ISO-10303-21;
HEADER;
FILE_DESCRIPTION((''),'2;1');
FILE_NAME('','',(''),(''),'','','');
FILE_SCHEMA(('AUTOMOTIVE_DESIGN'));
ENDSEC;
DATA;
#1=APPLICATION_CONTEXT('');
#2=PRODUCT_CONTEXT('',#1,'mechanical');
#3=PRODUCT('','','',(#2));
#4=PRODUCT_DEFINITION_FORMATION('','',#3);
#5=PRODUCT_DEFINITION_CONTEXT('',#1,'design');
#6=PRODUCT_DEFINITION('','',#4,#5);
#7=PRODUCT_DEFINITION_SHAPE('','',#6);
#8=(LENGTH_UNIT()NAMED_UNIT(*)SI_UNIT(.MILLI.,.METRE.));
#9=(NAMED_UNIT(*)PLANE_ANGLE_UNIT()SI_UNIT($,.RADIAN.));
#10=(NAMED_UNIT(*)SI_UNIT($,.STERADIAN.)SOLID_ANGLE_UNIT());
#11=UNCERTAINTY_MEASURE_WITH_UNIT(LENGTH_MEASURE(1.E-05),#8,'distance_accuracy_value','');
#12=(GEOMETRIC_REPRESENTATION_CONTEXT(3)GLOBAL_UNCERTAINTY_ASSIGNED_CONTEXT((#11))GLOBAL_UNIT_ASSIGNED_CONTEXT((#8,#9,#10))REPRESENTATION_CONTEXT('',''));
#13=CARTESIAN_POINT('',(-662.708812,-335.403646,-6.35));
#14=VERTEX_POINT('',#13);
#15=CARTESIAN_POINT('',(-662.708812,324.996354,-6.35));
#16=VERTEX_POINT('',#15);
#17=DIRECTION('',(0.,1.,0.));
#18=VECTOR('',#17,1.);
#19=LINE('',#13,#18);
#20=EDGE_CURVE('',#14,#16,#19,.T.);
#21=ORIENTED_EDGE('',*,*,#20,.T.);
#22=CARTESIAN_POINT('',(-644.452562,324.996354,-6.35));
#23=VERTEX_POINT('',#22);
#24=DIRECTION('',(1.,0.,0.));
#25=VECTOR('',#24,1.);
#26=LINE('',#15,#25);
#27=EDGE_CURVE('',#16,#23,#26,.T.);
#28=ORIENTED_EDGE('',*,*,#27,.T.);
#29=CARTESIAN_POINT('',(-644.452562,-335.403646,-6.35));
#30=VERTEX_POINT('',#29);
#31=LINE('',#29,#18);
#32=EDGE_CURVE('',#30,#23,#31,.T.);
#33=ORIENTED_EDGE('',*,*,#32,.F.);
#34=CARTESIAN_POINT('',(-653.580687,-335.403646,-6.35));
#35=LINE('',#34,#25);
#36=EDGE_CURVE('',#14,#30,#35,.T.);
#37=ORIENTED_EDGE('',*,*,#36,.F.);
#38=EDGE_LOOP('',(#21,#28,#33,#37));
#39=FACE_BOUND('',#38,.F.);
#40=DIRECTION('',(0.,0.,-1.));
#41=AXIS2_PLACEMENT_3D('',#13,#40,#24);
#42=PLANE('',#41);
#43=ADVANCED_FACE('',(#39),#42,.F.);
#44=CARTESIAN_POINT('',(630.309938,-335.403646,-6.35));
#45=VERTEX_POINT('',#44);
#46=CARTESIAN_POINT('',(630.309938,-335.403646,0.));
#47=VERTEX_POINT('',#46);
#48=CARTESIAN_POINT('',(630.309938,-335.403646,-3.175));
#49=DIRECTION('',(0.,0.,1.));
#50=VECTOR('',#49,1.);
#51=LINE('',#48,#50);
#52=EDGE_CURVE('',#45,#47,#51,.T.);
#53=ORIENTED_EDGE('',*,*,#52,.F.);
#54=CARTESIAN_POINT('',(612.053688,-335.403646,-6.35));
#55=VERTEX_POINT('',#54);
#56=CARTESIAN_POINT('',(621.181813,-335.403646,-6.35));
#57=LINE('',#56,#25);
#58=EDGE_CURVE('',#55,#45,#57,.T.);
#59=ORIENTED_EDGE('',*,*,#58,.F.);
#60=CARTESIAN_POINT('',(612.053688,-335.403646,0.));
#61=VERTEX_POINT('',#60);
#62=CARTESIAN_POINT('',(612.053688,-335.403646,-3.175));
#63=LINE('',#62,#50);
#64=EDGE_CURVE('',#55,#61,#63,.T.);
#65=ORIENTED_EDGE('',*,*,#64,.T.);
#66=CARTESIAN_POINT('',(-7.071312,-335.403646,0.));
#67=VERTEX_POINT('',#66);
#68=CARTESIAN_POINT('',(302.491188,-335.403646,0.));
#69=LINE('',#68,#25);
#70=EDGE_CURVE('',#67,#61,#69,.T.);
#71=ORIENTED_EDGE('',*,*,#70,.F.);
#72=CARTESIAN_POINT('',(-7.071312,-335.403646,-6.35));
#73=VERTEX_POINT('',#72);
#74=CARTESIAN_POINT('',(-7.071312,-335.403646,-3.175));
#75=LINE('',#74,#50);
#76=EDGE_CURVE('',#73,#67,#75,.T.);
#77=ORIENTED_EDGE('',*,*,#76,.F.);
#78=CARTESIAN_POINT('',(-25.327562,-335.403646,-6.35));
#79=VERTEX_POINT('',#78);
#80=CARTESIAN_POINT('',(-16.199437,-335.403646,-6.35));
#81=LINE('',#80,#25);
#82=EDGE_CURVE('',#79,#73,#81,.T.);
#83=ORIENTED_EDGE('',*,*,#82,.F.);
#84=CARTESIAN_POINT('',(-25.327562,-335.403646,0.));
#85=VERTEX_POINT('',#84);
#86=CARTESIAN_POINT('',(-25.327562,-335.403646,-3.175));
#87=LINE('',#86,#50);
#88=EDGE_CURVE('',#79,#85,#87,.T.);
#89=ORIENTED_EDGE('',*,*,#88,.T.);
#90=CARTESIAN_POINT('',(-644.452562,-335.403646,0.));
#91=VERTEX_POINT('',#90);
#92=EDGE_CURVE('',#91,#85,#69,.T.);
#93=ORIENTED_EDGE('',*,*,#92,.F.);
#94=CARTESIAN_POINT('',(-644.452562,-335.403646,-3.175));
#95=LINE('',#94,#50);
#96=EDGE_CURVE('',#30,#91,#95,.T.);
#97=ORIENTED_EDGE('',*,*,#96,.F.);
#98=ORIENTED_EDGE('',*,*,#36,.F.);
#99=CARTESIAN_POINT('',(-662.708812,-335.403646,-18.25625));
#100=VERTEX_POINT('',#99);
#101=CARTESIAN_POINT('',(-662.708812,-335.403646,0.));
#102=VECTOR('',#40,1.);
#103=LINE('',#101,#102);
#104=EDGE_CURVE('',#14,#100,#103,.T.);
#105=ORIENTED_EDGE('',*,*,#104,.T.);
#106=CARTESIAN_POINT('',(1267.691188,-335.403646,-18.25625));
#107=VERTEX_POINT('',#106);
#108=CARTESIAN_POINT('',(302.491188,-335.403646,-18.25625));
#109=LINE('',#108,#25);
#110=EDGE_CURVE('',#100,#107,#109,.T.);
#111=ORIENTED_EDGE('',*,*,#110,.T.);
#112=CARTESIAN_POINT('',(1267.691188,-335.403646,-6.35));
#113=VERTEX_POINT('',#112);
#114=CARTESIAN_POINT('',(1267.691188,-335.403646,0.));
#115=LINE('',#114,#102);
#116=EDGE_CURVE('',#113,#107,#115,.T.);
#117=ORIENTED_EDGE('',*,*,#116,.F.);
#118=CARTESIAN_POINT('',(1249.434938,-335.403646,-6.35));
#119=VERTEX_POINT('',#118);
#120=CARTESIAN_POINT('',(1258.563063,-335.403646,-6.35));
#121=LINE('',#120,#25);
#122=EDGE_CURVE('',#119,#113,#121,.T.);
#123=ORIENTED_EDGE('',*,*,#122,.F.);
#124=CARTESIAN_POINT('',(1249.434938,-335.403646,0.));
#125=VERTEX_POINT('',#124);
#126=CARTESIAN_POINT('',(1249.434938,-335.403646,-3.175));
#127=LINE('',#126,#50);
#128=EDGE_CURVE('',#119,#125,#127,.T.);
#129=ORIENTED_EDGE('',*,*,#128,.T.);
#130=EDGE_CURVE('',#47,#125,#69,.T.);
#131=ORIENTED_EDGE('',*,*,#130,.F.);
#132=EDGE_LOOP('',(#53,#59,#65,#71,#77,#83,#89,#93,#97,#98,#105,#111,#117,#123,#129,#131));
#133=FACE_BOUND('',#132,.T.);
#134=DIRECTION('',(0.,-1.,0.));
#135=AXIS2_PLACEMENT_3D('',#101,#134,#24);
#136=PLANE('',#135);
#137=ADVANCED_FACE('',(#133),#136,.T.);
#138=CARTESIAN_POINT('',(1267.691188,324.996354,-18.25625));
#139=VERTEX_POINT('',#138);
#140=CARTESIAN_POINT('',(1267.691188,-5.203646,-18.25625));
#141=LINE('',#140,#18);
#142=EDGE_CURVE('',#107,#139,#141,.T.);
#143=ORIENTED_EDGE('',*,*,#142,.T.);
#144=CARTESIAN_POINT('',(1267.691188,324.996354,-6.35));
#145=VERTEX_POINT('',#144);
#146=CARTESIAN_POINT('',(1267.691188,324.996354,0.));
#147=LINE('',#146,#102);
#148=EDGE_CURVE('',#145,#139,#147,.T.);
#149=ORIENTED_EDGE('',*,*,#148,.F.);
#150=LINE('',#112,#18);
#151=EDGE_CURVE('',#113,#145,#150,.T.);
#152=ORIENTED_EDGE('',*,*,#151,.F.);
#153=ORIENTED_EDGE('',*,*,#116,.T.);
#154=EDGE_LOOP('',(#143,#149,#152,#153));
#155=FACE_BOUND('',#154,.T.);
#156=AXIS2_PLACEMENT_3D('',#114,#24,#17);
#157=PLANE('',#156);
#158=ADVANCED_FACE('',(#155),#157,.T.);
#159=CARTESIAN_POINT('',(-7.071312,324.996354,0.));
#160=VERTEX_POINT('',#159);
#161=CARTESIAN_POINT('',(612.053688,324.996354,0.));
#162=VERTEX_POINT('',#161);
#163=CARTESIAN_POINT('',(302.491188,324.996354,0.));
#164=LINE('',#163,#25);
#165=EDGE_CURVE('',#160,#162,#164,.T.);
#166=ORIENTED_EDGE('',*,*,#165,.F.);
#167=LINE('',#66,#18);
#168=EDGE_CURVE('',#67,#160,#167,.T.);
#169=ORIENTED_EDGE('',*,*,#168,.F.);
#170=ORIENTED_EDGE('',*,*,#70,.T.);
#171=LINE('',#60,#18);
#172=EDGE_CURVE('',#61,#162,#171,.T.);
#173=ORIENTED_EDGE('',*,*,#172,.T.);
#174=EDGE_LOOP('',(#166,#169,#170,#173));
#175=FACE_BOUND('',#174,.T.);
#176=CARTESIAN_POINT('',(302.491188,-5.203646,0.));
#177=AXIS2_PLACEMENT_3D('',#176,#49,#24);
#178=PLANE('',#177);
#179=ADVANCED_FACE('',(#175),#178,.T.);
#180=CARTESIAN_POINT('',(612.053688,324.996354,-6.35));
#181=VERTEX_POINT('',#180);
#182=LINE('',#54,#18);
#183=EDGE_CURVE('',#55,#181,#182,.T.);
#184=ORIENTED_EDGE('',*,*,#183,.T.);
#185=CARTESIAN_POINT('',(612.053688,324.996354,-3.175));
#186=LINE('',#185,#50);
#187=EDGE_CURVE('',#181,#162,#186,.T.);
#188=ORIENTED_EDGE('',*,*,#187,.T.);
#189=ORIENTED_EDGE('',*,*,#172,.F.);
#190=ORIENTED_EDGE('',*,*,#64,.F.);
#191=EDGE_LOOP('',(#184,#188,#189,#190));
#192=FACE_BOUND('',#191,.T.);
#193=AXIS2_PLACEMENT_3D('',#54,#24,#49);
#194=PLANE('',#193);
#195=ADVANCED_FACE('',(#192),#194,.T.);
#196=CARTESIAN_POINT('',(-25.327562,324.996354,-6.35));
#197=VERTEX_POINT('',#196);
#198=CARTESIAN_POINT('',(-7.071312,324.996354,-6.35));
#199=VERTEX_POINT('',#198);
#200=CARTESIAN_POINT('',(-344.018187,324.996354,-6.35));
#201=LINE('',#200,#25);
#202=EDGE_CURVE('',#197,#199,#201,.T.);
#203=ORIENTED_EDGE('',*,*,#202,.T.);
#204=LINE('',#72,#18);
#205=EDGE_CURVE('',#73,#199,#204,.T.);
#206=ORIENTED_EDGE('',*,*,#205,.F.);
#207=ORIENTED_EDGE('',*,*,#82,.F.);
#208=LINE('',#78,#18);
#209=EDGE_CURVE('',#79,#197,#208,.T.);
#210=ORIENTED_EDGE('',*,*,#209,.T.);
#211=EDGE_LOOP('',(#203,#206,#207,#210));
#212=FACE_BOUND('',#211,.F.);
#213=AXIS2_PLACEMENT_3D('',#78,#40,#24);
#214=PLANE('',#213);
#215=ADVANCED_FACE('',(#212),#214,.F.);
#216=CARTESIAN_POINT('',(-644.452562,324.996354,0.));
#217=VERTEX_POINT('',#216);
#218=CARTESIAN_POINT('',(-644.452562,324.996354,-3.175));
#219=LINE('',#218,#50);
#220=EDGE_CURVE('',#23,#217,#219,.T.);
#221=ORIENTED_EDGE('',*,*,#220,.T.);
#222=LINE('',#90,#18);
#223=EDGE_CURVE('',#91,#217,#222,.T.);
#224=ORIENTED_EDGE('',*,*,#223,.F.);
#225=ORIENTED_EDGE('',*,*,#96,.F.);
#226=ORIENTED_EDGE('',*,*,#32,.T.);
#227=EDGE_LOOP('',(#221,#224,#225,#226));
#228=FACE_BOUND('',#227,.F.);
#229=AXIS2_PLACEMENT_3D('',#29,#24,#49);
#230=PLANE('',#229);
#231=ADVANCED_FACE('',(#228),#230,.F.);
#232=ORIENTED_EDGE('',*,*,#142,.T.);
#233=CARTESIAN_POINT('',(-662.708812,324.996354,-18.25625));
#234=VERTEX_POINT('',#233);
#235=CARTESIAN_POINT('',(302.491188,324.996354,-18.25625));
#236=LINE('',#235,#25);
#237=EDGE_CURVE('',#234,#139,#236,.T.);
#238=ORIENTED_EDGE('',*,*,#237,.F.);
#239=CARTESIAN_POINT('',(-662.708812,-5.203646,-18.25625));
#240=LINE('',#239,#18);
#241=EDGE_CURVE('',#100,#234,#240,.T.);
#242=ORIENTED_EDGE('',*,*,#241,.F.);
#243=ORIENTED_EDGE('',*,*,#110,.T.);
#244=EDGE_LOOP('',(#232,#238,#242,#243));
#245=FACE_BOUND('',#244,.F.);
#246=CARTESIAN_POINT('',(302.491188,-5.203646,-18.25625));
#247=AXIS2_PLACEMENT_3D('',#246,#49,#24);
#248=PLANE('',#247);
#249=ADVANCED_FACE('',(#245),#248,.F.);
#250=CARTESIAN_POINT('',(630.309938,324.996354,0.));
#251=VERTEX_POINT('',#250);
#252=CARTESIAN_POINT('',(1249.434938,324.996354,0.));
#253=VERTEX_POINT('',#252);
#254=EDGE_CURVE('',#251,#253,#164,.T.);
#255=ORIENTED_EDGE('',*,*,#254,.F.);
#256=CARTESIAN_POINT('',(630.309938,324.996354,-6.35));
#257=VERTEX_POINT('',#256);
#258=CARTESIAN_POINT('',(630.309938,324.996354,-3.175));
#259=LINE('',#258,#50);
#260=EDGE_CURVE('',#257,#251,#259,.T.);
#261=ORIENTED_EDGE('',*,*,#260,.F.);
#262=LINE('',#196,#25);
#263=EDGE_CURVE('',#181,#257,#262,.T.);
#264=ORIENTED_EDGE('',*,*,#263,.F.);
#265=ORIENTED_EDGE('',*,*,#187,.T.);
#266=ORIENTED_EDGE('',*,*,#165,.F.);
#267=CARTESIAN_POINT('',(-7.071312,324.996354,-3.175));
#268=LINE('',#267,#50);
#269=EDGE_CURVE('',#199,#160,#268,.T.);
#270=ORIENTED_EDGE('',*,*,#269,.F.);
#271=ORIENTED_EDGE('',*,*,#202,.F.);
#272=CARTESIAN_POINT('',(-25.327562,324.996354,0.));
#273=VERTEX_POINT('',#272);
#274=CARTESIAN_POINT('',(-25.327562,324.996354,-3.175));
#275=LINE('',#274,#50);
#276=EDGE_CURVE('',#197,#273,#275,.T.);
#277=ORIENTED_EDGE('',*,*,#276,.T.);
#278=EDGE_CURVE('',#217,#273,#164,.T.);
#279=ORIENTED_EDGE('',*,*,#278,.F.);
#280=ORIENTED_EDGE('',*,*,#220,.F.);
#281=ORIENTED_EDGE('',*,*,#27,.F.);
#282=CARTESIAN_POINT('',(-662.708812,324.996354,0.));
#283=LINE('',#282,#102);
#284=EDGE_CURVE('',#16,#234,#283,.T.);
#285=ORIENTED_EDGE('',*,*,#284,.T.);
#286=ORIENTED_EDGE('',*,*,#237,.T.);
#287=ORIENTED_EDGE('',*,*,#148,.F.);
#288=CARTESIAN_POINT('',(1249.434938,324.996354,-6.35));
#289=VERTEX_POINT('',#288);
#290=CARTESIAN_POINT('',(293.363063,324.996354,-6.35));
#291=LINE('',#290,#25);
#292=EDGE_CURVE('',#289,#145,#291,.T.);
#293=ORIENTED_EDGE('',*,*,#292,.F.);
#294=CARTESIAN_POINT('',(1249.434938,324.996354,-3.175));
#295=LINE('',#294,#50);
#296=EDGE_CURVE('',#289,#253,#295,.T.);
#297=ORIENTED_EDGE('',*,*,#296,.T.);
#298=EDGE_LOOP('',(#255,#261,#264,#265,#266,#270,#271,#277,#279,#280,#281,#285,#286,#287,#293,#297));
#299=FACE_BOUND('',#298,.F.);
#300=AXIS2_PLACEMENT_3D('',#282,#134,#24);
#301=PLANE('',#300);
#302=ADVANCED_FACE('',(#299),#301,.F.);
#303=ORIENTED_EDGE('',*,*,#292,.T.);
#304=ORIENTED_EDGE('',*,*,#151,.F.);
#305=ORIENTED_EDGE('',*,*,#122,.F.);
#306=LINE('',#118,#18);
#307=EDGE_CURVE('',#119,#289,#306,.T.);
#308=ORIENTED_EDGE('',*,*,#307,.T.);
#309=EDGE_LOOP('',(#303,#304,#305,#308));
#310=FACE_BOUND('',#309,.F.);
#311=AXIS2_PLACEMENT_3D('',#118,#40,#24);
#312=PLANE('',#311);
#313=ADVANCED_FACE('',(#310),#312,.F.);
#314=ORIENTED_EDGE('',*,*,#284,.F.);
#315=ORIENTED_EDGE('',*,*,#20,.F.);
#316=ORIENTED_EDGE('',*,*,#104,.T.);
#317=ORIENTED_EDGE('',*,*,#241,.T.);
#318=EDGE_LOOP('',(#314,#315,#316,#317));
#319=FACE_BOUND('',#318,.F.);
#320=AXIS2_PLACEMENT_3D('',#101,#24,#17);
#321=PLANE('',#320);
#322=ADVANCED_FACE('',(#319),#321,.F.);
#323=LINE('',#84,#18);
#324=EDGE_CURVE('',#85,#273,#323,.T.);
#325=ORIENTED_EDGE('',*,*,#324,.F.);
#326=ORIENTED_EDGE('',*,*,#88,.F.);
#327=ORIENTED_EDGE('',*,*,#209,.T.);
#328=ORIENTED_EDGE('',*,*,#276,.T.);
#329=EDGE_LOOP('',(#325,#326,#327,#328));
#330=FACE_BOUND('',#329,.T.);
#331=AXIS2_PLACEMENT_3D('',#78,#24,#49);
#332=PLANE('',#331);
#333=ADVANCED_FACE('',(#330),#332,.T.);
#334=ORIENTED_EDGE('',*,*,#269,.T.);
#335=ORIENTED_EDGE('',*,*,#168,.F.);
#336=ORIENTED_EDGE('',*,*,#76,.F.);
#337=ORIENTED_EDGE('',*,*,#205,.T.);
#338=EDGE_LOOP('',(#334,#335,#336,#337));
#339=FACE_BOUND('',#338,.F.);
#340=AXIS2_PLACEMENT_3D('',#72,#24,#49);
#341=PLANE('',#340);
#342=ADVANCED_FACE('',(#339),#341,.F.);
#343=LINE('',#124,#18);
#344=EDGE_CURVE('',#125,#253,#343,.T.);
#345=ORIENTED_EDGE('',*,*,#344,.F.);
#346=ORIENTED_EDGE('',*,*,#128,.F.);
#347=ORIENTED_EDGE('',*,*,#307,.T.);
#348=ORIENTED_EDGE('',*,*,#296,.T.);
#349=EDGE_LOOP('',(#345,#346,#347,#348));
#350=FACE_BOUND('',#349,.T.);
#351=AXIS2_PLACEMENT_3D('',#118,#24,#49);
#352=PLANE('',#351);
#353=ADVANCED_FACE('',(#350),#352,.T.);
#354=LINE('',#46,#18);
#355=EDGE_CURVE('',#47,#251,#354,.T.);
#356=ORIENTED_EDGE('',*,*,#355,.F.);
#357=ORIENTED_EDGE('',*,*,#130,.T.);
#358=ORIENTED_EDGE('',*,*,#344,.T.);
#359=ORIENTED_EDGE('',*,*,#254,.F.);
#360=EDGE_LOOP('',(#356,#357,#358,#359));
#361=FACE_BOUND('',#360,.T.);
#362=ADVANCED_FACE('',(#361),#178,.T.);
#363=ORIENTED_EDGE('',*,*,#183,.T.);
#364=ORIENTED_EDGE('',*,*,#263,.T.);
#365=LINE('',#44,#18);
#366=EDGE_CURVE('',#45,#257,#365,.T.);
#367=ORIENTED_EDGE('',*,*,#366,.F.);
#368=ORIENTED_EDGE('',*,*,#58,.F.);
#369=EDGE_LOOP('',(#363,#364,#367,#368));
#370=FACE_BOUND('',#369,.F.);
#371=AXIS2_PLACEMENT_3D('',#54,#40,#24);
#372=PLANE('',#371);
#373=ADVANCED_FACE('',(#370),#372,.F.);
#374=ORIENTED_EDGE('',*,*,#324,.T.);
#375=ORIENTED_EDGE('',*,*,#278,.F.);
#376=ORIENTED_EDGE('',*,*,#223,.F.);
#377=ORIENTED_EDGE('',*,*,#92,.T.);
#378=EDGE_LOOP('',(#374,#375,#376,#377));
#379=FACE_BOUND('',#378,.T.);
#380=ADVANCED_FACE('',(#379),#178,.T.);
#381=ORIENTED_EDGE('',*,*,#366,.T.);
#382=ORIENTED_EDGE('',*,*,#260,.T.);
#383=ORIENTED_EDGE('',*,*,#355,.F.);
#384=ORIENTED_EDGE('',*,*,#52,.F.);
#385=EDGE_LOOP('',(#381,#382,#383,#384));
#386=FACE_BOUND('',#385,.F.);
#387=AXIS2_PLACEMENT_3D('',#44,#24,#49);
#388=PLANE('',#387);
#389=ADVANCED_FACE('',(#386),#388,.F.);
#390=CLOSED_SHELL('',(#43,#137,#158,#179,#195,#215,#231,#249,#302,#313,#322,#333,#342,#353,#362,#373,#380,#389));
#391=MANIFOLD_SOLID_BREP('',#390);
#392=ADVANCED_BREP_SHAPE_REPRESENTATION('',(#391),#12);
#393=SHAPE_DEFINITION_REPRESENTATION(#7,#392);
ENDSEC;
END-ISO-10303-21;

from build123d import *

# Parameters (mm, degrees)
F0_W     = 1930.4
F0_H     = 660.4
F1_DEPTH = 18.25625
F2_W     = 18.25625
F2_H     = 6.35
F3_DEPTH = 660.401
F4_W     = 18.25625
F4_H     = 6.35
F5_DEPTH = 660.401
F6_W     = 18.25625
F6_H     = 6.35
F7_DEPTH = 660.401
F8_W     = 18.25625
F8_H     = 6.35
F9_DEPTH = 660.401


# Not quite as in the source:
# - a length typed as a fraction of an inch, garbled in the dataset ("3 / 203.2 mm" for 3/8 in), is restored


with BuildPart() as f1:
    # F0 (on Top) → F1 (new body)
    with BuildSketch(Plane.XY):
        with Locations((302.4911884634, -5.2036456764)):
            Rectangle(F0_W, F0_H)
    extrude(amount=-F1_DEPTH)

    # F2 (on face) → F3 (cut, through all)
    with BuildSketch(Plane.XZ.offset(335.4036456764)):
        with Locations((-653.5806865366, -3.175)):
            Rectangle(F2_W, F2_H)
    extrude(amount=-F3_DEPTH, mode=Mode.SUBTRACT)

    # F4 (on face) → F5 (cut, through all)
    with BuildSketch(Plane.XZ.offset(335.4036456764)):
        with Locations((1258.5630634634, -3.175)):
            Rectangle(F4_W, F4_H)
    extrude(amount=-F5_DEPTH, mode=Mode.SUBTRACT)

    # F6 (on face) → F7 (cut, through all)
    with BuildSketch(Plane.XZ.offset(335.4036456764)):
        with Locations((621.1818134634, -3.175)):
            Rectangle(F6_W, F6_H)
    extrude(amount=-F7_DEPTH, mode=Mode.SUBTRACT)

    # F8 (on face) → F9 (cut, through all)
    with BuildSketch(Plane.XZ.offset(335.4036456764)):
        with Locations((-16.1994365366, -3.175)):
            Rectangle(F8_W, F8_H)
    extrude(amount=-F9_DEPTH, mode=Mode.SUBTRACT)


solid = f1.part
